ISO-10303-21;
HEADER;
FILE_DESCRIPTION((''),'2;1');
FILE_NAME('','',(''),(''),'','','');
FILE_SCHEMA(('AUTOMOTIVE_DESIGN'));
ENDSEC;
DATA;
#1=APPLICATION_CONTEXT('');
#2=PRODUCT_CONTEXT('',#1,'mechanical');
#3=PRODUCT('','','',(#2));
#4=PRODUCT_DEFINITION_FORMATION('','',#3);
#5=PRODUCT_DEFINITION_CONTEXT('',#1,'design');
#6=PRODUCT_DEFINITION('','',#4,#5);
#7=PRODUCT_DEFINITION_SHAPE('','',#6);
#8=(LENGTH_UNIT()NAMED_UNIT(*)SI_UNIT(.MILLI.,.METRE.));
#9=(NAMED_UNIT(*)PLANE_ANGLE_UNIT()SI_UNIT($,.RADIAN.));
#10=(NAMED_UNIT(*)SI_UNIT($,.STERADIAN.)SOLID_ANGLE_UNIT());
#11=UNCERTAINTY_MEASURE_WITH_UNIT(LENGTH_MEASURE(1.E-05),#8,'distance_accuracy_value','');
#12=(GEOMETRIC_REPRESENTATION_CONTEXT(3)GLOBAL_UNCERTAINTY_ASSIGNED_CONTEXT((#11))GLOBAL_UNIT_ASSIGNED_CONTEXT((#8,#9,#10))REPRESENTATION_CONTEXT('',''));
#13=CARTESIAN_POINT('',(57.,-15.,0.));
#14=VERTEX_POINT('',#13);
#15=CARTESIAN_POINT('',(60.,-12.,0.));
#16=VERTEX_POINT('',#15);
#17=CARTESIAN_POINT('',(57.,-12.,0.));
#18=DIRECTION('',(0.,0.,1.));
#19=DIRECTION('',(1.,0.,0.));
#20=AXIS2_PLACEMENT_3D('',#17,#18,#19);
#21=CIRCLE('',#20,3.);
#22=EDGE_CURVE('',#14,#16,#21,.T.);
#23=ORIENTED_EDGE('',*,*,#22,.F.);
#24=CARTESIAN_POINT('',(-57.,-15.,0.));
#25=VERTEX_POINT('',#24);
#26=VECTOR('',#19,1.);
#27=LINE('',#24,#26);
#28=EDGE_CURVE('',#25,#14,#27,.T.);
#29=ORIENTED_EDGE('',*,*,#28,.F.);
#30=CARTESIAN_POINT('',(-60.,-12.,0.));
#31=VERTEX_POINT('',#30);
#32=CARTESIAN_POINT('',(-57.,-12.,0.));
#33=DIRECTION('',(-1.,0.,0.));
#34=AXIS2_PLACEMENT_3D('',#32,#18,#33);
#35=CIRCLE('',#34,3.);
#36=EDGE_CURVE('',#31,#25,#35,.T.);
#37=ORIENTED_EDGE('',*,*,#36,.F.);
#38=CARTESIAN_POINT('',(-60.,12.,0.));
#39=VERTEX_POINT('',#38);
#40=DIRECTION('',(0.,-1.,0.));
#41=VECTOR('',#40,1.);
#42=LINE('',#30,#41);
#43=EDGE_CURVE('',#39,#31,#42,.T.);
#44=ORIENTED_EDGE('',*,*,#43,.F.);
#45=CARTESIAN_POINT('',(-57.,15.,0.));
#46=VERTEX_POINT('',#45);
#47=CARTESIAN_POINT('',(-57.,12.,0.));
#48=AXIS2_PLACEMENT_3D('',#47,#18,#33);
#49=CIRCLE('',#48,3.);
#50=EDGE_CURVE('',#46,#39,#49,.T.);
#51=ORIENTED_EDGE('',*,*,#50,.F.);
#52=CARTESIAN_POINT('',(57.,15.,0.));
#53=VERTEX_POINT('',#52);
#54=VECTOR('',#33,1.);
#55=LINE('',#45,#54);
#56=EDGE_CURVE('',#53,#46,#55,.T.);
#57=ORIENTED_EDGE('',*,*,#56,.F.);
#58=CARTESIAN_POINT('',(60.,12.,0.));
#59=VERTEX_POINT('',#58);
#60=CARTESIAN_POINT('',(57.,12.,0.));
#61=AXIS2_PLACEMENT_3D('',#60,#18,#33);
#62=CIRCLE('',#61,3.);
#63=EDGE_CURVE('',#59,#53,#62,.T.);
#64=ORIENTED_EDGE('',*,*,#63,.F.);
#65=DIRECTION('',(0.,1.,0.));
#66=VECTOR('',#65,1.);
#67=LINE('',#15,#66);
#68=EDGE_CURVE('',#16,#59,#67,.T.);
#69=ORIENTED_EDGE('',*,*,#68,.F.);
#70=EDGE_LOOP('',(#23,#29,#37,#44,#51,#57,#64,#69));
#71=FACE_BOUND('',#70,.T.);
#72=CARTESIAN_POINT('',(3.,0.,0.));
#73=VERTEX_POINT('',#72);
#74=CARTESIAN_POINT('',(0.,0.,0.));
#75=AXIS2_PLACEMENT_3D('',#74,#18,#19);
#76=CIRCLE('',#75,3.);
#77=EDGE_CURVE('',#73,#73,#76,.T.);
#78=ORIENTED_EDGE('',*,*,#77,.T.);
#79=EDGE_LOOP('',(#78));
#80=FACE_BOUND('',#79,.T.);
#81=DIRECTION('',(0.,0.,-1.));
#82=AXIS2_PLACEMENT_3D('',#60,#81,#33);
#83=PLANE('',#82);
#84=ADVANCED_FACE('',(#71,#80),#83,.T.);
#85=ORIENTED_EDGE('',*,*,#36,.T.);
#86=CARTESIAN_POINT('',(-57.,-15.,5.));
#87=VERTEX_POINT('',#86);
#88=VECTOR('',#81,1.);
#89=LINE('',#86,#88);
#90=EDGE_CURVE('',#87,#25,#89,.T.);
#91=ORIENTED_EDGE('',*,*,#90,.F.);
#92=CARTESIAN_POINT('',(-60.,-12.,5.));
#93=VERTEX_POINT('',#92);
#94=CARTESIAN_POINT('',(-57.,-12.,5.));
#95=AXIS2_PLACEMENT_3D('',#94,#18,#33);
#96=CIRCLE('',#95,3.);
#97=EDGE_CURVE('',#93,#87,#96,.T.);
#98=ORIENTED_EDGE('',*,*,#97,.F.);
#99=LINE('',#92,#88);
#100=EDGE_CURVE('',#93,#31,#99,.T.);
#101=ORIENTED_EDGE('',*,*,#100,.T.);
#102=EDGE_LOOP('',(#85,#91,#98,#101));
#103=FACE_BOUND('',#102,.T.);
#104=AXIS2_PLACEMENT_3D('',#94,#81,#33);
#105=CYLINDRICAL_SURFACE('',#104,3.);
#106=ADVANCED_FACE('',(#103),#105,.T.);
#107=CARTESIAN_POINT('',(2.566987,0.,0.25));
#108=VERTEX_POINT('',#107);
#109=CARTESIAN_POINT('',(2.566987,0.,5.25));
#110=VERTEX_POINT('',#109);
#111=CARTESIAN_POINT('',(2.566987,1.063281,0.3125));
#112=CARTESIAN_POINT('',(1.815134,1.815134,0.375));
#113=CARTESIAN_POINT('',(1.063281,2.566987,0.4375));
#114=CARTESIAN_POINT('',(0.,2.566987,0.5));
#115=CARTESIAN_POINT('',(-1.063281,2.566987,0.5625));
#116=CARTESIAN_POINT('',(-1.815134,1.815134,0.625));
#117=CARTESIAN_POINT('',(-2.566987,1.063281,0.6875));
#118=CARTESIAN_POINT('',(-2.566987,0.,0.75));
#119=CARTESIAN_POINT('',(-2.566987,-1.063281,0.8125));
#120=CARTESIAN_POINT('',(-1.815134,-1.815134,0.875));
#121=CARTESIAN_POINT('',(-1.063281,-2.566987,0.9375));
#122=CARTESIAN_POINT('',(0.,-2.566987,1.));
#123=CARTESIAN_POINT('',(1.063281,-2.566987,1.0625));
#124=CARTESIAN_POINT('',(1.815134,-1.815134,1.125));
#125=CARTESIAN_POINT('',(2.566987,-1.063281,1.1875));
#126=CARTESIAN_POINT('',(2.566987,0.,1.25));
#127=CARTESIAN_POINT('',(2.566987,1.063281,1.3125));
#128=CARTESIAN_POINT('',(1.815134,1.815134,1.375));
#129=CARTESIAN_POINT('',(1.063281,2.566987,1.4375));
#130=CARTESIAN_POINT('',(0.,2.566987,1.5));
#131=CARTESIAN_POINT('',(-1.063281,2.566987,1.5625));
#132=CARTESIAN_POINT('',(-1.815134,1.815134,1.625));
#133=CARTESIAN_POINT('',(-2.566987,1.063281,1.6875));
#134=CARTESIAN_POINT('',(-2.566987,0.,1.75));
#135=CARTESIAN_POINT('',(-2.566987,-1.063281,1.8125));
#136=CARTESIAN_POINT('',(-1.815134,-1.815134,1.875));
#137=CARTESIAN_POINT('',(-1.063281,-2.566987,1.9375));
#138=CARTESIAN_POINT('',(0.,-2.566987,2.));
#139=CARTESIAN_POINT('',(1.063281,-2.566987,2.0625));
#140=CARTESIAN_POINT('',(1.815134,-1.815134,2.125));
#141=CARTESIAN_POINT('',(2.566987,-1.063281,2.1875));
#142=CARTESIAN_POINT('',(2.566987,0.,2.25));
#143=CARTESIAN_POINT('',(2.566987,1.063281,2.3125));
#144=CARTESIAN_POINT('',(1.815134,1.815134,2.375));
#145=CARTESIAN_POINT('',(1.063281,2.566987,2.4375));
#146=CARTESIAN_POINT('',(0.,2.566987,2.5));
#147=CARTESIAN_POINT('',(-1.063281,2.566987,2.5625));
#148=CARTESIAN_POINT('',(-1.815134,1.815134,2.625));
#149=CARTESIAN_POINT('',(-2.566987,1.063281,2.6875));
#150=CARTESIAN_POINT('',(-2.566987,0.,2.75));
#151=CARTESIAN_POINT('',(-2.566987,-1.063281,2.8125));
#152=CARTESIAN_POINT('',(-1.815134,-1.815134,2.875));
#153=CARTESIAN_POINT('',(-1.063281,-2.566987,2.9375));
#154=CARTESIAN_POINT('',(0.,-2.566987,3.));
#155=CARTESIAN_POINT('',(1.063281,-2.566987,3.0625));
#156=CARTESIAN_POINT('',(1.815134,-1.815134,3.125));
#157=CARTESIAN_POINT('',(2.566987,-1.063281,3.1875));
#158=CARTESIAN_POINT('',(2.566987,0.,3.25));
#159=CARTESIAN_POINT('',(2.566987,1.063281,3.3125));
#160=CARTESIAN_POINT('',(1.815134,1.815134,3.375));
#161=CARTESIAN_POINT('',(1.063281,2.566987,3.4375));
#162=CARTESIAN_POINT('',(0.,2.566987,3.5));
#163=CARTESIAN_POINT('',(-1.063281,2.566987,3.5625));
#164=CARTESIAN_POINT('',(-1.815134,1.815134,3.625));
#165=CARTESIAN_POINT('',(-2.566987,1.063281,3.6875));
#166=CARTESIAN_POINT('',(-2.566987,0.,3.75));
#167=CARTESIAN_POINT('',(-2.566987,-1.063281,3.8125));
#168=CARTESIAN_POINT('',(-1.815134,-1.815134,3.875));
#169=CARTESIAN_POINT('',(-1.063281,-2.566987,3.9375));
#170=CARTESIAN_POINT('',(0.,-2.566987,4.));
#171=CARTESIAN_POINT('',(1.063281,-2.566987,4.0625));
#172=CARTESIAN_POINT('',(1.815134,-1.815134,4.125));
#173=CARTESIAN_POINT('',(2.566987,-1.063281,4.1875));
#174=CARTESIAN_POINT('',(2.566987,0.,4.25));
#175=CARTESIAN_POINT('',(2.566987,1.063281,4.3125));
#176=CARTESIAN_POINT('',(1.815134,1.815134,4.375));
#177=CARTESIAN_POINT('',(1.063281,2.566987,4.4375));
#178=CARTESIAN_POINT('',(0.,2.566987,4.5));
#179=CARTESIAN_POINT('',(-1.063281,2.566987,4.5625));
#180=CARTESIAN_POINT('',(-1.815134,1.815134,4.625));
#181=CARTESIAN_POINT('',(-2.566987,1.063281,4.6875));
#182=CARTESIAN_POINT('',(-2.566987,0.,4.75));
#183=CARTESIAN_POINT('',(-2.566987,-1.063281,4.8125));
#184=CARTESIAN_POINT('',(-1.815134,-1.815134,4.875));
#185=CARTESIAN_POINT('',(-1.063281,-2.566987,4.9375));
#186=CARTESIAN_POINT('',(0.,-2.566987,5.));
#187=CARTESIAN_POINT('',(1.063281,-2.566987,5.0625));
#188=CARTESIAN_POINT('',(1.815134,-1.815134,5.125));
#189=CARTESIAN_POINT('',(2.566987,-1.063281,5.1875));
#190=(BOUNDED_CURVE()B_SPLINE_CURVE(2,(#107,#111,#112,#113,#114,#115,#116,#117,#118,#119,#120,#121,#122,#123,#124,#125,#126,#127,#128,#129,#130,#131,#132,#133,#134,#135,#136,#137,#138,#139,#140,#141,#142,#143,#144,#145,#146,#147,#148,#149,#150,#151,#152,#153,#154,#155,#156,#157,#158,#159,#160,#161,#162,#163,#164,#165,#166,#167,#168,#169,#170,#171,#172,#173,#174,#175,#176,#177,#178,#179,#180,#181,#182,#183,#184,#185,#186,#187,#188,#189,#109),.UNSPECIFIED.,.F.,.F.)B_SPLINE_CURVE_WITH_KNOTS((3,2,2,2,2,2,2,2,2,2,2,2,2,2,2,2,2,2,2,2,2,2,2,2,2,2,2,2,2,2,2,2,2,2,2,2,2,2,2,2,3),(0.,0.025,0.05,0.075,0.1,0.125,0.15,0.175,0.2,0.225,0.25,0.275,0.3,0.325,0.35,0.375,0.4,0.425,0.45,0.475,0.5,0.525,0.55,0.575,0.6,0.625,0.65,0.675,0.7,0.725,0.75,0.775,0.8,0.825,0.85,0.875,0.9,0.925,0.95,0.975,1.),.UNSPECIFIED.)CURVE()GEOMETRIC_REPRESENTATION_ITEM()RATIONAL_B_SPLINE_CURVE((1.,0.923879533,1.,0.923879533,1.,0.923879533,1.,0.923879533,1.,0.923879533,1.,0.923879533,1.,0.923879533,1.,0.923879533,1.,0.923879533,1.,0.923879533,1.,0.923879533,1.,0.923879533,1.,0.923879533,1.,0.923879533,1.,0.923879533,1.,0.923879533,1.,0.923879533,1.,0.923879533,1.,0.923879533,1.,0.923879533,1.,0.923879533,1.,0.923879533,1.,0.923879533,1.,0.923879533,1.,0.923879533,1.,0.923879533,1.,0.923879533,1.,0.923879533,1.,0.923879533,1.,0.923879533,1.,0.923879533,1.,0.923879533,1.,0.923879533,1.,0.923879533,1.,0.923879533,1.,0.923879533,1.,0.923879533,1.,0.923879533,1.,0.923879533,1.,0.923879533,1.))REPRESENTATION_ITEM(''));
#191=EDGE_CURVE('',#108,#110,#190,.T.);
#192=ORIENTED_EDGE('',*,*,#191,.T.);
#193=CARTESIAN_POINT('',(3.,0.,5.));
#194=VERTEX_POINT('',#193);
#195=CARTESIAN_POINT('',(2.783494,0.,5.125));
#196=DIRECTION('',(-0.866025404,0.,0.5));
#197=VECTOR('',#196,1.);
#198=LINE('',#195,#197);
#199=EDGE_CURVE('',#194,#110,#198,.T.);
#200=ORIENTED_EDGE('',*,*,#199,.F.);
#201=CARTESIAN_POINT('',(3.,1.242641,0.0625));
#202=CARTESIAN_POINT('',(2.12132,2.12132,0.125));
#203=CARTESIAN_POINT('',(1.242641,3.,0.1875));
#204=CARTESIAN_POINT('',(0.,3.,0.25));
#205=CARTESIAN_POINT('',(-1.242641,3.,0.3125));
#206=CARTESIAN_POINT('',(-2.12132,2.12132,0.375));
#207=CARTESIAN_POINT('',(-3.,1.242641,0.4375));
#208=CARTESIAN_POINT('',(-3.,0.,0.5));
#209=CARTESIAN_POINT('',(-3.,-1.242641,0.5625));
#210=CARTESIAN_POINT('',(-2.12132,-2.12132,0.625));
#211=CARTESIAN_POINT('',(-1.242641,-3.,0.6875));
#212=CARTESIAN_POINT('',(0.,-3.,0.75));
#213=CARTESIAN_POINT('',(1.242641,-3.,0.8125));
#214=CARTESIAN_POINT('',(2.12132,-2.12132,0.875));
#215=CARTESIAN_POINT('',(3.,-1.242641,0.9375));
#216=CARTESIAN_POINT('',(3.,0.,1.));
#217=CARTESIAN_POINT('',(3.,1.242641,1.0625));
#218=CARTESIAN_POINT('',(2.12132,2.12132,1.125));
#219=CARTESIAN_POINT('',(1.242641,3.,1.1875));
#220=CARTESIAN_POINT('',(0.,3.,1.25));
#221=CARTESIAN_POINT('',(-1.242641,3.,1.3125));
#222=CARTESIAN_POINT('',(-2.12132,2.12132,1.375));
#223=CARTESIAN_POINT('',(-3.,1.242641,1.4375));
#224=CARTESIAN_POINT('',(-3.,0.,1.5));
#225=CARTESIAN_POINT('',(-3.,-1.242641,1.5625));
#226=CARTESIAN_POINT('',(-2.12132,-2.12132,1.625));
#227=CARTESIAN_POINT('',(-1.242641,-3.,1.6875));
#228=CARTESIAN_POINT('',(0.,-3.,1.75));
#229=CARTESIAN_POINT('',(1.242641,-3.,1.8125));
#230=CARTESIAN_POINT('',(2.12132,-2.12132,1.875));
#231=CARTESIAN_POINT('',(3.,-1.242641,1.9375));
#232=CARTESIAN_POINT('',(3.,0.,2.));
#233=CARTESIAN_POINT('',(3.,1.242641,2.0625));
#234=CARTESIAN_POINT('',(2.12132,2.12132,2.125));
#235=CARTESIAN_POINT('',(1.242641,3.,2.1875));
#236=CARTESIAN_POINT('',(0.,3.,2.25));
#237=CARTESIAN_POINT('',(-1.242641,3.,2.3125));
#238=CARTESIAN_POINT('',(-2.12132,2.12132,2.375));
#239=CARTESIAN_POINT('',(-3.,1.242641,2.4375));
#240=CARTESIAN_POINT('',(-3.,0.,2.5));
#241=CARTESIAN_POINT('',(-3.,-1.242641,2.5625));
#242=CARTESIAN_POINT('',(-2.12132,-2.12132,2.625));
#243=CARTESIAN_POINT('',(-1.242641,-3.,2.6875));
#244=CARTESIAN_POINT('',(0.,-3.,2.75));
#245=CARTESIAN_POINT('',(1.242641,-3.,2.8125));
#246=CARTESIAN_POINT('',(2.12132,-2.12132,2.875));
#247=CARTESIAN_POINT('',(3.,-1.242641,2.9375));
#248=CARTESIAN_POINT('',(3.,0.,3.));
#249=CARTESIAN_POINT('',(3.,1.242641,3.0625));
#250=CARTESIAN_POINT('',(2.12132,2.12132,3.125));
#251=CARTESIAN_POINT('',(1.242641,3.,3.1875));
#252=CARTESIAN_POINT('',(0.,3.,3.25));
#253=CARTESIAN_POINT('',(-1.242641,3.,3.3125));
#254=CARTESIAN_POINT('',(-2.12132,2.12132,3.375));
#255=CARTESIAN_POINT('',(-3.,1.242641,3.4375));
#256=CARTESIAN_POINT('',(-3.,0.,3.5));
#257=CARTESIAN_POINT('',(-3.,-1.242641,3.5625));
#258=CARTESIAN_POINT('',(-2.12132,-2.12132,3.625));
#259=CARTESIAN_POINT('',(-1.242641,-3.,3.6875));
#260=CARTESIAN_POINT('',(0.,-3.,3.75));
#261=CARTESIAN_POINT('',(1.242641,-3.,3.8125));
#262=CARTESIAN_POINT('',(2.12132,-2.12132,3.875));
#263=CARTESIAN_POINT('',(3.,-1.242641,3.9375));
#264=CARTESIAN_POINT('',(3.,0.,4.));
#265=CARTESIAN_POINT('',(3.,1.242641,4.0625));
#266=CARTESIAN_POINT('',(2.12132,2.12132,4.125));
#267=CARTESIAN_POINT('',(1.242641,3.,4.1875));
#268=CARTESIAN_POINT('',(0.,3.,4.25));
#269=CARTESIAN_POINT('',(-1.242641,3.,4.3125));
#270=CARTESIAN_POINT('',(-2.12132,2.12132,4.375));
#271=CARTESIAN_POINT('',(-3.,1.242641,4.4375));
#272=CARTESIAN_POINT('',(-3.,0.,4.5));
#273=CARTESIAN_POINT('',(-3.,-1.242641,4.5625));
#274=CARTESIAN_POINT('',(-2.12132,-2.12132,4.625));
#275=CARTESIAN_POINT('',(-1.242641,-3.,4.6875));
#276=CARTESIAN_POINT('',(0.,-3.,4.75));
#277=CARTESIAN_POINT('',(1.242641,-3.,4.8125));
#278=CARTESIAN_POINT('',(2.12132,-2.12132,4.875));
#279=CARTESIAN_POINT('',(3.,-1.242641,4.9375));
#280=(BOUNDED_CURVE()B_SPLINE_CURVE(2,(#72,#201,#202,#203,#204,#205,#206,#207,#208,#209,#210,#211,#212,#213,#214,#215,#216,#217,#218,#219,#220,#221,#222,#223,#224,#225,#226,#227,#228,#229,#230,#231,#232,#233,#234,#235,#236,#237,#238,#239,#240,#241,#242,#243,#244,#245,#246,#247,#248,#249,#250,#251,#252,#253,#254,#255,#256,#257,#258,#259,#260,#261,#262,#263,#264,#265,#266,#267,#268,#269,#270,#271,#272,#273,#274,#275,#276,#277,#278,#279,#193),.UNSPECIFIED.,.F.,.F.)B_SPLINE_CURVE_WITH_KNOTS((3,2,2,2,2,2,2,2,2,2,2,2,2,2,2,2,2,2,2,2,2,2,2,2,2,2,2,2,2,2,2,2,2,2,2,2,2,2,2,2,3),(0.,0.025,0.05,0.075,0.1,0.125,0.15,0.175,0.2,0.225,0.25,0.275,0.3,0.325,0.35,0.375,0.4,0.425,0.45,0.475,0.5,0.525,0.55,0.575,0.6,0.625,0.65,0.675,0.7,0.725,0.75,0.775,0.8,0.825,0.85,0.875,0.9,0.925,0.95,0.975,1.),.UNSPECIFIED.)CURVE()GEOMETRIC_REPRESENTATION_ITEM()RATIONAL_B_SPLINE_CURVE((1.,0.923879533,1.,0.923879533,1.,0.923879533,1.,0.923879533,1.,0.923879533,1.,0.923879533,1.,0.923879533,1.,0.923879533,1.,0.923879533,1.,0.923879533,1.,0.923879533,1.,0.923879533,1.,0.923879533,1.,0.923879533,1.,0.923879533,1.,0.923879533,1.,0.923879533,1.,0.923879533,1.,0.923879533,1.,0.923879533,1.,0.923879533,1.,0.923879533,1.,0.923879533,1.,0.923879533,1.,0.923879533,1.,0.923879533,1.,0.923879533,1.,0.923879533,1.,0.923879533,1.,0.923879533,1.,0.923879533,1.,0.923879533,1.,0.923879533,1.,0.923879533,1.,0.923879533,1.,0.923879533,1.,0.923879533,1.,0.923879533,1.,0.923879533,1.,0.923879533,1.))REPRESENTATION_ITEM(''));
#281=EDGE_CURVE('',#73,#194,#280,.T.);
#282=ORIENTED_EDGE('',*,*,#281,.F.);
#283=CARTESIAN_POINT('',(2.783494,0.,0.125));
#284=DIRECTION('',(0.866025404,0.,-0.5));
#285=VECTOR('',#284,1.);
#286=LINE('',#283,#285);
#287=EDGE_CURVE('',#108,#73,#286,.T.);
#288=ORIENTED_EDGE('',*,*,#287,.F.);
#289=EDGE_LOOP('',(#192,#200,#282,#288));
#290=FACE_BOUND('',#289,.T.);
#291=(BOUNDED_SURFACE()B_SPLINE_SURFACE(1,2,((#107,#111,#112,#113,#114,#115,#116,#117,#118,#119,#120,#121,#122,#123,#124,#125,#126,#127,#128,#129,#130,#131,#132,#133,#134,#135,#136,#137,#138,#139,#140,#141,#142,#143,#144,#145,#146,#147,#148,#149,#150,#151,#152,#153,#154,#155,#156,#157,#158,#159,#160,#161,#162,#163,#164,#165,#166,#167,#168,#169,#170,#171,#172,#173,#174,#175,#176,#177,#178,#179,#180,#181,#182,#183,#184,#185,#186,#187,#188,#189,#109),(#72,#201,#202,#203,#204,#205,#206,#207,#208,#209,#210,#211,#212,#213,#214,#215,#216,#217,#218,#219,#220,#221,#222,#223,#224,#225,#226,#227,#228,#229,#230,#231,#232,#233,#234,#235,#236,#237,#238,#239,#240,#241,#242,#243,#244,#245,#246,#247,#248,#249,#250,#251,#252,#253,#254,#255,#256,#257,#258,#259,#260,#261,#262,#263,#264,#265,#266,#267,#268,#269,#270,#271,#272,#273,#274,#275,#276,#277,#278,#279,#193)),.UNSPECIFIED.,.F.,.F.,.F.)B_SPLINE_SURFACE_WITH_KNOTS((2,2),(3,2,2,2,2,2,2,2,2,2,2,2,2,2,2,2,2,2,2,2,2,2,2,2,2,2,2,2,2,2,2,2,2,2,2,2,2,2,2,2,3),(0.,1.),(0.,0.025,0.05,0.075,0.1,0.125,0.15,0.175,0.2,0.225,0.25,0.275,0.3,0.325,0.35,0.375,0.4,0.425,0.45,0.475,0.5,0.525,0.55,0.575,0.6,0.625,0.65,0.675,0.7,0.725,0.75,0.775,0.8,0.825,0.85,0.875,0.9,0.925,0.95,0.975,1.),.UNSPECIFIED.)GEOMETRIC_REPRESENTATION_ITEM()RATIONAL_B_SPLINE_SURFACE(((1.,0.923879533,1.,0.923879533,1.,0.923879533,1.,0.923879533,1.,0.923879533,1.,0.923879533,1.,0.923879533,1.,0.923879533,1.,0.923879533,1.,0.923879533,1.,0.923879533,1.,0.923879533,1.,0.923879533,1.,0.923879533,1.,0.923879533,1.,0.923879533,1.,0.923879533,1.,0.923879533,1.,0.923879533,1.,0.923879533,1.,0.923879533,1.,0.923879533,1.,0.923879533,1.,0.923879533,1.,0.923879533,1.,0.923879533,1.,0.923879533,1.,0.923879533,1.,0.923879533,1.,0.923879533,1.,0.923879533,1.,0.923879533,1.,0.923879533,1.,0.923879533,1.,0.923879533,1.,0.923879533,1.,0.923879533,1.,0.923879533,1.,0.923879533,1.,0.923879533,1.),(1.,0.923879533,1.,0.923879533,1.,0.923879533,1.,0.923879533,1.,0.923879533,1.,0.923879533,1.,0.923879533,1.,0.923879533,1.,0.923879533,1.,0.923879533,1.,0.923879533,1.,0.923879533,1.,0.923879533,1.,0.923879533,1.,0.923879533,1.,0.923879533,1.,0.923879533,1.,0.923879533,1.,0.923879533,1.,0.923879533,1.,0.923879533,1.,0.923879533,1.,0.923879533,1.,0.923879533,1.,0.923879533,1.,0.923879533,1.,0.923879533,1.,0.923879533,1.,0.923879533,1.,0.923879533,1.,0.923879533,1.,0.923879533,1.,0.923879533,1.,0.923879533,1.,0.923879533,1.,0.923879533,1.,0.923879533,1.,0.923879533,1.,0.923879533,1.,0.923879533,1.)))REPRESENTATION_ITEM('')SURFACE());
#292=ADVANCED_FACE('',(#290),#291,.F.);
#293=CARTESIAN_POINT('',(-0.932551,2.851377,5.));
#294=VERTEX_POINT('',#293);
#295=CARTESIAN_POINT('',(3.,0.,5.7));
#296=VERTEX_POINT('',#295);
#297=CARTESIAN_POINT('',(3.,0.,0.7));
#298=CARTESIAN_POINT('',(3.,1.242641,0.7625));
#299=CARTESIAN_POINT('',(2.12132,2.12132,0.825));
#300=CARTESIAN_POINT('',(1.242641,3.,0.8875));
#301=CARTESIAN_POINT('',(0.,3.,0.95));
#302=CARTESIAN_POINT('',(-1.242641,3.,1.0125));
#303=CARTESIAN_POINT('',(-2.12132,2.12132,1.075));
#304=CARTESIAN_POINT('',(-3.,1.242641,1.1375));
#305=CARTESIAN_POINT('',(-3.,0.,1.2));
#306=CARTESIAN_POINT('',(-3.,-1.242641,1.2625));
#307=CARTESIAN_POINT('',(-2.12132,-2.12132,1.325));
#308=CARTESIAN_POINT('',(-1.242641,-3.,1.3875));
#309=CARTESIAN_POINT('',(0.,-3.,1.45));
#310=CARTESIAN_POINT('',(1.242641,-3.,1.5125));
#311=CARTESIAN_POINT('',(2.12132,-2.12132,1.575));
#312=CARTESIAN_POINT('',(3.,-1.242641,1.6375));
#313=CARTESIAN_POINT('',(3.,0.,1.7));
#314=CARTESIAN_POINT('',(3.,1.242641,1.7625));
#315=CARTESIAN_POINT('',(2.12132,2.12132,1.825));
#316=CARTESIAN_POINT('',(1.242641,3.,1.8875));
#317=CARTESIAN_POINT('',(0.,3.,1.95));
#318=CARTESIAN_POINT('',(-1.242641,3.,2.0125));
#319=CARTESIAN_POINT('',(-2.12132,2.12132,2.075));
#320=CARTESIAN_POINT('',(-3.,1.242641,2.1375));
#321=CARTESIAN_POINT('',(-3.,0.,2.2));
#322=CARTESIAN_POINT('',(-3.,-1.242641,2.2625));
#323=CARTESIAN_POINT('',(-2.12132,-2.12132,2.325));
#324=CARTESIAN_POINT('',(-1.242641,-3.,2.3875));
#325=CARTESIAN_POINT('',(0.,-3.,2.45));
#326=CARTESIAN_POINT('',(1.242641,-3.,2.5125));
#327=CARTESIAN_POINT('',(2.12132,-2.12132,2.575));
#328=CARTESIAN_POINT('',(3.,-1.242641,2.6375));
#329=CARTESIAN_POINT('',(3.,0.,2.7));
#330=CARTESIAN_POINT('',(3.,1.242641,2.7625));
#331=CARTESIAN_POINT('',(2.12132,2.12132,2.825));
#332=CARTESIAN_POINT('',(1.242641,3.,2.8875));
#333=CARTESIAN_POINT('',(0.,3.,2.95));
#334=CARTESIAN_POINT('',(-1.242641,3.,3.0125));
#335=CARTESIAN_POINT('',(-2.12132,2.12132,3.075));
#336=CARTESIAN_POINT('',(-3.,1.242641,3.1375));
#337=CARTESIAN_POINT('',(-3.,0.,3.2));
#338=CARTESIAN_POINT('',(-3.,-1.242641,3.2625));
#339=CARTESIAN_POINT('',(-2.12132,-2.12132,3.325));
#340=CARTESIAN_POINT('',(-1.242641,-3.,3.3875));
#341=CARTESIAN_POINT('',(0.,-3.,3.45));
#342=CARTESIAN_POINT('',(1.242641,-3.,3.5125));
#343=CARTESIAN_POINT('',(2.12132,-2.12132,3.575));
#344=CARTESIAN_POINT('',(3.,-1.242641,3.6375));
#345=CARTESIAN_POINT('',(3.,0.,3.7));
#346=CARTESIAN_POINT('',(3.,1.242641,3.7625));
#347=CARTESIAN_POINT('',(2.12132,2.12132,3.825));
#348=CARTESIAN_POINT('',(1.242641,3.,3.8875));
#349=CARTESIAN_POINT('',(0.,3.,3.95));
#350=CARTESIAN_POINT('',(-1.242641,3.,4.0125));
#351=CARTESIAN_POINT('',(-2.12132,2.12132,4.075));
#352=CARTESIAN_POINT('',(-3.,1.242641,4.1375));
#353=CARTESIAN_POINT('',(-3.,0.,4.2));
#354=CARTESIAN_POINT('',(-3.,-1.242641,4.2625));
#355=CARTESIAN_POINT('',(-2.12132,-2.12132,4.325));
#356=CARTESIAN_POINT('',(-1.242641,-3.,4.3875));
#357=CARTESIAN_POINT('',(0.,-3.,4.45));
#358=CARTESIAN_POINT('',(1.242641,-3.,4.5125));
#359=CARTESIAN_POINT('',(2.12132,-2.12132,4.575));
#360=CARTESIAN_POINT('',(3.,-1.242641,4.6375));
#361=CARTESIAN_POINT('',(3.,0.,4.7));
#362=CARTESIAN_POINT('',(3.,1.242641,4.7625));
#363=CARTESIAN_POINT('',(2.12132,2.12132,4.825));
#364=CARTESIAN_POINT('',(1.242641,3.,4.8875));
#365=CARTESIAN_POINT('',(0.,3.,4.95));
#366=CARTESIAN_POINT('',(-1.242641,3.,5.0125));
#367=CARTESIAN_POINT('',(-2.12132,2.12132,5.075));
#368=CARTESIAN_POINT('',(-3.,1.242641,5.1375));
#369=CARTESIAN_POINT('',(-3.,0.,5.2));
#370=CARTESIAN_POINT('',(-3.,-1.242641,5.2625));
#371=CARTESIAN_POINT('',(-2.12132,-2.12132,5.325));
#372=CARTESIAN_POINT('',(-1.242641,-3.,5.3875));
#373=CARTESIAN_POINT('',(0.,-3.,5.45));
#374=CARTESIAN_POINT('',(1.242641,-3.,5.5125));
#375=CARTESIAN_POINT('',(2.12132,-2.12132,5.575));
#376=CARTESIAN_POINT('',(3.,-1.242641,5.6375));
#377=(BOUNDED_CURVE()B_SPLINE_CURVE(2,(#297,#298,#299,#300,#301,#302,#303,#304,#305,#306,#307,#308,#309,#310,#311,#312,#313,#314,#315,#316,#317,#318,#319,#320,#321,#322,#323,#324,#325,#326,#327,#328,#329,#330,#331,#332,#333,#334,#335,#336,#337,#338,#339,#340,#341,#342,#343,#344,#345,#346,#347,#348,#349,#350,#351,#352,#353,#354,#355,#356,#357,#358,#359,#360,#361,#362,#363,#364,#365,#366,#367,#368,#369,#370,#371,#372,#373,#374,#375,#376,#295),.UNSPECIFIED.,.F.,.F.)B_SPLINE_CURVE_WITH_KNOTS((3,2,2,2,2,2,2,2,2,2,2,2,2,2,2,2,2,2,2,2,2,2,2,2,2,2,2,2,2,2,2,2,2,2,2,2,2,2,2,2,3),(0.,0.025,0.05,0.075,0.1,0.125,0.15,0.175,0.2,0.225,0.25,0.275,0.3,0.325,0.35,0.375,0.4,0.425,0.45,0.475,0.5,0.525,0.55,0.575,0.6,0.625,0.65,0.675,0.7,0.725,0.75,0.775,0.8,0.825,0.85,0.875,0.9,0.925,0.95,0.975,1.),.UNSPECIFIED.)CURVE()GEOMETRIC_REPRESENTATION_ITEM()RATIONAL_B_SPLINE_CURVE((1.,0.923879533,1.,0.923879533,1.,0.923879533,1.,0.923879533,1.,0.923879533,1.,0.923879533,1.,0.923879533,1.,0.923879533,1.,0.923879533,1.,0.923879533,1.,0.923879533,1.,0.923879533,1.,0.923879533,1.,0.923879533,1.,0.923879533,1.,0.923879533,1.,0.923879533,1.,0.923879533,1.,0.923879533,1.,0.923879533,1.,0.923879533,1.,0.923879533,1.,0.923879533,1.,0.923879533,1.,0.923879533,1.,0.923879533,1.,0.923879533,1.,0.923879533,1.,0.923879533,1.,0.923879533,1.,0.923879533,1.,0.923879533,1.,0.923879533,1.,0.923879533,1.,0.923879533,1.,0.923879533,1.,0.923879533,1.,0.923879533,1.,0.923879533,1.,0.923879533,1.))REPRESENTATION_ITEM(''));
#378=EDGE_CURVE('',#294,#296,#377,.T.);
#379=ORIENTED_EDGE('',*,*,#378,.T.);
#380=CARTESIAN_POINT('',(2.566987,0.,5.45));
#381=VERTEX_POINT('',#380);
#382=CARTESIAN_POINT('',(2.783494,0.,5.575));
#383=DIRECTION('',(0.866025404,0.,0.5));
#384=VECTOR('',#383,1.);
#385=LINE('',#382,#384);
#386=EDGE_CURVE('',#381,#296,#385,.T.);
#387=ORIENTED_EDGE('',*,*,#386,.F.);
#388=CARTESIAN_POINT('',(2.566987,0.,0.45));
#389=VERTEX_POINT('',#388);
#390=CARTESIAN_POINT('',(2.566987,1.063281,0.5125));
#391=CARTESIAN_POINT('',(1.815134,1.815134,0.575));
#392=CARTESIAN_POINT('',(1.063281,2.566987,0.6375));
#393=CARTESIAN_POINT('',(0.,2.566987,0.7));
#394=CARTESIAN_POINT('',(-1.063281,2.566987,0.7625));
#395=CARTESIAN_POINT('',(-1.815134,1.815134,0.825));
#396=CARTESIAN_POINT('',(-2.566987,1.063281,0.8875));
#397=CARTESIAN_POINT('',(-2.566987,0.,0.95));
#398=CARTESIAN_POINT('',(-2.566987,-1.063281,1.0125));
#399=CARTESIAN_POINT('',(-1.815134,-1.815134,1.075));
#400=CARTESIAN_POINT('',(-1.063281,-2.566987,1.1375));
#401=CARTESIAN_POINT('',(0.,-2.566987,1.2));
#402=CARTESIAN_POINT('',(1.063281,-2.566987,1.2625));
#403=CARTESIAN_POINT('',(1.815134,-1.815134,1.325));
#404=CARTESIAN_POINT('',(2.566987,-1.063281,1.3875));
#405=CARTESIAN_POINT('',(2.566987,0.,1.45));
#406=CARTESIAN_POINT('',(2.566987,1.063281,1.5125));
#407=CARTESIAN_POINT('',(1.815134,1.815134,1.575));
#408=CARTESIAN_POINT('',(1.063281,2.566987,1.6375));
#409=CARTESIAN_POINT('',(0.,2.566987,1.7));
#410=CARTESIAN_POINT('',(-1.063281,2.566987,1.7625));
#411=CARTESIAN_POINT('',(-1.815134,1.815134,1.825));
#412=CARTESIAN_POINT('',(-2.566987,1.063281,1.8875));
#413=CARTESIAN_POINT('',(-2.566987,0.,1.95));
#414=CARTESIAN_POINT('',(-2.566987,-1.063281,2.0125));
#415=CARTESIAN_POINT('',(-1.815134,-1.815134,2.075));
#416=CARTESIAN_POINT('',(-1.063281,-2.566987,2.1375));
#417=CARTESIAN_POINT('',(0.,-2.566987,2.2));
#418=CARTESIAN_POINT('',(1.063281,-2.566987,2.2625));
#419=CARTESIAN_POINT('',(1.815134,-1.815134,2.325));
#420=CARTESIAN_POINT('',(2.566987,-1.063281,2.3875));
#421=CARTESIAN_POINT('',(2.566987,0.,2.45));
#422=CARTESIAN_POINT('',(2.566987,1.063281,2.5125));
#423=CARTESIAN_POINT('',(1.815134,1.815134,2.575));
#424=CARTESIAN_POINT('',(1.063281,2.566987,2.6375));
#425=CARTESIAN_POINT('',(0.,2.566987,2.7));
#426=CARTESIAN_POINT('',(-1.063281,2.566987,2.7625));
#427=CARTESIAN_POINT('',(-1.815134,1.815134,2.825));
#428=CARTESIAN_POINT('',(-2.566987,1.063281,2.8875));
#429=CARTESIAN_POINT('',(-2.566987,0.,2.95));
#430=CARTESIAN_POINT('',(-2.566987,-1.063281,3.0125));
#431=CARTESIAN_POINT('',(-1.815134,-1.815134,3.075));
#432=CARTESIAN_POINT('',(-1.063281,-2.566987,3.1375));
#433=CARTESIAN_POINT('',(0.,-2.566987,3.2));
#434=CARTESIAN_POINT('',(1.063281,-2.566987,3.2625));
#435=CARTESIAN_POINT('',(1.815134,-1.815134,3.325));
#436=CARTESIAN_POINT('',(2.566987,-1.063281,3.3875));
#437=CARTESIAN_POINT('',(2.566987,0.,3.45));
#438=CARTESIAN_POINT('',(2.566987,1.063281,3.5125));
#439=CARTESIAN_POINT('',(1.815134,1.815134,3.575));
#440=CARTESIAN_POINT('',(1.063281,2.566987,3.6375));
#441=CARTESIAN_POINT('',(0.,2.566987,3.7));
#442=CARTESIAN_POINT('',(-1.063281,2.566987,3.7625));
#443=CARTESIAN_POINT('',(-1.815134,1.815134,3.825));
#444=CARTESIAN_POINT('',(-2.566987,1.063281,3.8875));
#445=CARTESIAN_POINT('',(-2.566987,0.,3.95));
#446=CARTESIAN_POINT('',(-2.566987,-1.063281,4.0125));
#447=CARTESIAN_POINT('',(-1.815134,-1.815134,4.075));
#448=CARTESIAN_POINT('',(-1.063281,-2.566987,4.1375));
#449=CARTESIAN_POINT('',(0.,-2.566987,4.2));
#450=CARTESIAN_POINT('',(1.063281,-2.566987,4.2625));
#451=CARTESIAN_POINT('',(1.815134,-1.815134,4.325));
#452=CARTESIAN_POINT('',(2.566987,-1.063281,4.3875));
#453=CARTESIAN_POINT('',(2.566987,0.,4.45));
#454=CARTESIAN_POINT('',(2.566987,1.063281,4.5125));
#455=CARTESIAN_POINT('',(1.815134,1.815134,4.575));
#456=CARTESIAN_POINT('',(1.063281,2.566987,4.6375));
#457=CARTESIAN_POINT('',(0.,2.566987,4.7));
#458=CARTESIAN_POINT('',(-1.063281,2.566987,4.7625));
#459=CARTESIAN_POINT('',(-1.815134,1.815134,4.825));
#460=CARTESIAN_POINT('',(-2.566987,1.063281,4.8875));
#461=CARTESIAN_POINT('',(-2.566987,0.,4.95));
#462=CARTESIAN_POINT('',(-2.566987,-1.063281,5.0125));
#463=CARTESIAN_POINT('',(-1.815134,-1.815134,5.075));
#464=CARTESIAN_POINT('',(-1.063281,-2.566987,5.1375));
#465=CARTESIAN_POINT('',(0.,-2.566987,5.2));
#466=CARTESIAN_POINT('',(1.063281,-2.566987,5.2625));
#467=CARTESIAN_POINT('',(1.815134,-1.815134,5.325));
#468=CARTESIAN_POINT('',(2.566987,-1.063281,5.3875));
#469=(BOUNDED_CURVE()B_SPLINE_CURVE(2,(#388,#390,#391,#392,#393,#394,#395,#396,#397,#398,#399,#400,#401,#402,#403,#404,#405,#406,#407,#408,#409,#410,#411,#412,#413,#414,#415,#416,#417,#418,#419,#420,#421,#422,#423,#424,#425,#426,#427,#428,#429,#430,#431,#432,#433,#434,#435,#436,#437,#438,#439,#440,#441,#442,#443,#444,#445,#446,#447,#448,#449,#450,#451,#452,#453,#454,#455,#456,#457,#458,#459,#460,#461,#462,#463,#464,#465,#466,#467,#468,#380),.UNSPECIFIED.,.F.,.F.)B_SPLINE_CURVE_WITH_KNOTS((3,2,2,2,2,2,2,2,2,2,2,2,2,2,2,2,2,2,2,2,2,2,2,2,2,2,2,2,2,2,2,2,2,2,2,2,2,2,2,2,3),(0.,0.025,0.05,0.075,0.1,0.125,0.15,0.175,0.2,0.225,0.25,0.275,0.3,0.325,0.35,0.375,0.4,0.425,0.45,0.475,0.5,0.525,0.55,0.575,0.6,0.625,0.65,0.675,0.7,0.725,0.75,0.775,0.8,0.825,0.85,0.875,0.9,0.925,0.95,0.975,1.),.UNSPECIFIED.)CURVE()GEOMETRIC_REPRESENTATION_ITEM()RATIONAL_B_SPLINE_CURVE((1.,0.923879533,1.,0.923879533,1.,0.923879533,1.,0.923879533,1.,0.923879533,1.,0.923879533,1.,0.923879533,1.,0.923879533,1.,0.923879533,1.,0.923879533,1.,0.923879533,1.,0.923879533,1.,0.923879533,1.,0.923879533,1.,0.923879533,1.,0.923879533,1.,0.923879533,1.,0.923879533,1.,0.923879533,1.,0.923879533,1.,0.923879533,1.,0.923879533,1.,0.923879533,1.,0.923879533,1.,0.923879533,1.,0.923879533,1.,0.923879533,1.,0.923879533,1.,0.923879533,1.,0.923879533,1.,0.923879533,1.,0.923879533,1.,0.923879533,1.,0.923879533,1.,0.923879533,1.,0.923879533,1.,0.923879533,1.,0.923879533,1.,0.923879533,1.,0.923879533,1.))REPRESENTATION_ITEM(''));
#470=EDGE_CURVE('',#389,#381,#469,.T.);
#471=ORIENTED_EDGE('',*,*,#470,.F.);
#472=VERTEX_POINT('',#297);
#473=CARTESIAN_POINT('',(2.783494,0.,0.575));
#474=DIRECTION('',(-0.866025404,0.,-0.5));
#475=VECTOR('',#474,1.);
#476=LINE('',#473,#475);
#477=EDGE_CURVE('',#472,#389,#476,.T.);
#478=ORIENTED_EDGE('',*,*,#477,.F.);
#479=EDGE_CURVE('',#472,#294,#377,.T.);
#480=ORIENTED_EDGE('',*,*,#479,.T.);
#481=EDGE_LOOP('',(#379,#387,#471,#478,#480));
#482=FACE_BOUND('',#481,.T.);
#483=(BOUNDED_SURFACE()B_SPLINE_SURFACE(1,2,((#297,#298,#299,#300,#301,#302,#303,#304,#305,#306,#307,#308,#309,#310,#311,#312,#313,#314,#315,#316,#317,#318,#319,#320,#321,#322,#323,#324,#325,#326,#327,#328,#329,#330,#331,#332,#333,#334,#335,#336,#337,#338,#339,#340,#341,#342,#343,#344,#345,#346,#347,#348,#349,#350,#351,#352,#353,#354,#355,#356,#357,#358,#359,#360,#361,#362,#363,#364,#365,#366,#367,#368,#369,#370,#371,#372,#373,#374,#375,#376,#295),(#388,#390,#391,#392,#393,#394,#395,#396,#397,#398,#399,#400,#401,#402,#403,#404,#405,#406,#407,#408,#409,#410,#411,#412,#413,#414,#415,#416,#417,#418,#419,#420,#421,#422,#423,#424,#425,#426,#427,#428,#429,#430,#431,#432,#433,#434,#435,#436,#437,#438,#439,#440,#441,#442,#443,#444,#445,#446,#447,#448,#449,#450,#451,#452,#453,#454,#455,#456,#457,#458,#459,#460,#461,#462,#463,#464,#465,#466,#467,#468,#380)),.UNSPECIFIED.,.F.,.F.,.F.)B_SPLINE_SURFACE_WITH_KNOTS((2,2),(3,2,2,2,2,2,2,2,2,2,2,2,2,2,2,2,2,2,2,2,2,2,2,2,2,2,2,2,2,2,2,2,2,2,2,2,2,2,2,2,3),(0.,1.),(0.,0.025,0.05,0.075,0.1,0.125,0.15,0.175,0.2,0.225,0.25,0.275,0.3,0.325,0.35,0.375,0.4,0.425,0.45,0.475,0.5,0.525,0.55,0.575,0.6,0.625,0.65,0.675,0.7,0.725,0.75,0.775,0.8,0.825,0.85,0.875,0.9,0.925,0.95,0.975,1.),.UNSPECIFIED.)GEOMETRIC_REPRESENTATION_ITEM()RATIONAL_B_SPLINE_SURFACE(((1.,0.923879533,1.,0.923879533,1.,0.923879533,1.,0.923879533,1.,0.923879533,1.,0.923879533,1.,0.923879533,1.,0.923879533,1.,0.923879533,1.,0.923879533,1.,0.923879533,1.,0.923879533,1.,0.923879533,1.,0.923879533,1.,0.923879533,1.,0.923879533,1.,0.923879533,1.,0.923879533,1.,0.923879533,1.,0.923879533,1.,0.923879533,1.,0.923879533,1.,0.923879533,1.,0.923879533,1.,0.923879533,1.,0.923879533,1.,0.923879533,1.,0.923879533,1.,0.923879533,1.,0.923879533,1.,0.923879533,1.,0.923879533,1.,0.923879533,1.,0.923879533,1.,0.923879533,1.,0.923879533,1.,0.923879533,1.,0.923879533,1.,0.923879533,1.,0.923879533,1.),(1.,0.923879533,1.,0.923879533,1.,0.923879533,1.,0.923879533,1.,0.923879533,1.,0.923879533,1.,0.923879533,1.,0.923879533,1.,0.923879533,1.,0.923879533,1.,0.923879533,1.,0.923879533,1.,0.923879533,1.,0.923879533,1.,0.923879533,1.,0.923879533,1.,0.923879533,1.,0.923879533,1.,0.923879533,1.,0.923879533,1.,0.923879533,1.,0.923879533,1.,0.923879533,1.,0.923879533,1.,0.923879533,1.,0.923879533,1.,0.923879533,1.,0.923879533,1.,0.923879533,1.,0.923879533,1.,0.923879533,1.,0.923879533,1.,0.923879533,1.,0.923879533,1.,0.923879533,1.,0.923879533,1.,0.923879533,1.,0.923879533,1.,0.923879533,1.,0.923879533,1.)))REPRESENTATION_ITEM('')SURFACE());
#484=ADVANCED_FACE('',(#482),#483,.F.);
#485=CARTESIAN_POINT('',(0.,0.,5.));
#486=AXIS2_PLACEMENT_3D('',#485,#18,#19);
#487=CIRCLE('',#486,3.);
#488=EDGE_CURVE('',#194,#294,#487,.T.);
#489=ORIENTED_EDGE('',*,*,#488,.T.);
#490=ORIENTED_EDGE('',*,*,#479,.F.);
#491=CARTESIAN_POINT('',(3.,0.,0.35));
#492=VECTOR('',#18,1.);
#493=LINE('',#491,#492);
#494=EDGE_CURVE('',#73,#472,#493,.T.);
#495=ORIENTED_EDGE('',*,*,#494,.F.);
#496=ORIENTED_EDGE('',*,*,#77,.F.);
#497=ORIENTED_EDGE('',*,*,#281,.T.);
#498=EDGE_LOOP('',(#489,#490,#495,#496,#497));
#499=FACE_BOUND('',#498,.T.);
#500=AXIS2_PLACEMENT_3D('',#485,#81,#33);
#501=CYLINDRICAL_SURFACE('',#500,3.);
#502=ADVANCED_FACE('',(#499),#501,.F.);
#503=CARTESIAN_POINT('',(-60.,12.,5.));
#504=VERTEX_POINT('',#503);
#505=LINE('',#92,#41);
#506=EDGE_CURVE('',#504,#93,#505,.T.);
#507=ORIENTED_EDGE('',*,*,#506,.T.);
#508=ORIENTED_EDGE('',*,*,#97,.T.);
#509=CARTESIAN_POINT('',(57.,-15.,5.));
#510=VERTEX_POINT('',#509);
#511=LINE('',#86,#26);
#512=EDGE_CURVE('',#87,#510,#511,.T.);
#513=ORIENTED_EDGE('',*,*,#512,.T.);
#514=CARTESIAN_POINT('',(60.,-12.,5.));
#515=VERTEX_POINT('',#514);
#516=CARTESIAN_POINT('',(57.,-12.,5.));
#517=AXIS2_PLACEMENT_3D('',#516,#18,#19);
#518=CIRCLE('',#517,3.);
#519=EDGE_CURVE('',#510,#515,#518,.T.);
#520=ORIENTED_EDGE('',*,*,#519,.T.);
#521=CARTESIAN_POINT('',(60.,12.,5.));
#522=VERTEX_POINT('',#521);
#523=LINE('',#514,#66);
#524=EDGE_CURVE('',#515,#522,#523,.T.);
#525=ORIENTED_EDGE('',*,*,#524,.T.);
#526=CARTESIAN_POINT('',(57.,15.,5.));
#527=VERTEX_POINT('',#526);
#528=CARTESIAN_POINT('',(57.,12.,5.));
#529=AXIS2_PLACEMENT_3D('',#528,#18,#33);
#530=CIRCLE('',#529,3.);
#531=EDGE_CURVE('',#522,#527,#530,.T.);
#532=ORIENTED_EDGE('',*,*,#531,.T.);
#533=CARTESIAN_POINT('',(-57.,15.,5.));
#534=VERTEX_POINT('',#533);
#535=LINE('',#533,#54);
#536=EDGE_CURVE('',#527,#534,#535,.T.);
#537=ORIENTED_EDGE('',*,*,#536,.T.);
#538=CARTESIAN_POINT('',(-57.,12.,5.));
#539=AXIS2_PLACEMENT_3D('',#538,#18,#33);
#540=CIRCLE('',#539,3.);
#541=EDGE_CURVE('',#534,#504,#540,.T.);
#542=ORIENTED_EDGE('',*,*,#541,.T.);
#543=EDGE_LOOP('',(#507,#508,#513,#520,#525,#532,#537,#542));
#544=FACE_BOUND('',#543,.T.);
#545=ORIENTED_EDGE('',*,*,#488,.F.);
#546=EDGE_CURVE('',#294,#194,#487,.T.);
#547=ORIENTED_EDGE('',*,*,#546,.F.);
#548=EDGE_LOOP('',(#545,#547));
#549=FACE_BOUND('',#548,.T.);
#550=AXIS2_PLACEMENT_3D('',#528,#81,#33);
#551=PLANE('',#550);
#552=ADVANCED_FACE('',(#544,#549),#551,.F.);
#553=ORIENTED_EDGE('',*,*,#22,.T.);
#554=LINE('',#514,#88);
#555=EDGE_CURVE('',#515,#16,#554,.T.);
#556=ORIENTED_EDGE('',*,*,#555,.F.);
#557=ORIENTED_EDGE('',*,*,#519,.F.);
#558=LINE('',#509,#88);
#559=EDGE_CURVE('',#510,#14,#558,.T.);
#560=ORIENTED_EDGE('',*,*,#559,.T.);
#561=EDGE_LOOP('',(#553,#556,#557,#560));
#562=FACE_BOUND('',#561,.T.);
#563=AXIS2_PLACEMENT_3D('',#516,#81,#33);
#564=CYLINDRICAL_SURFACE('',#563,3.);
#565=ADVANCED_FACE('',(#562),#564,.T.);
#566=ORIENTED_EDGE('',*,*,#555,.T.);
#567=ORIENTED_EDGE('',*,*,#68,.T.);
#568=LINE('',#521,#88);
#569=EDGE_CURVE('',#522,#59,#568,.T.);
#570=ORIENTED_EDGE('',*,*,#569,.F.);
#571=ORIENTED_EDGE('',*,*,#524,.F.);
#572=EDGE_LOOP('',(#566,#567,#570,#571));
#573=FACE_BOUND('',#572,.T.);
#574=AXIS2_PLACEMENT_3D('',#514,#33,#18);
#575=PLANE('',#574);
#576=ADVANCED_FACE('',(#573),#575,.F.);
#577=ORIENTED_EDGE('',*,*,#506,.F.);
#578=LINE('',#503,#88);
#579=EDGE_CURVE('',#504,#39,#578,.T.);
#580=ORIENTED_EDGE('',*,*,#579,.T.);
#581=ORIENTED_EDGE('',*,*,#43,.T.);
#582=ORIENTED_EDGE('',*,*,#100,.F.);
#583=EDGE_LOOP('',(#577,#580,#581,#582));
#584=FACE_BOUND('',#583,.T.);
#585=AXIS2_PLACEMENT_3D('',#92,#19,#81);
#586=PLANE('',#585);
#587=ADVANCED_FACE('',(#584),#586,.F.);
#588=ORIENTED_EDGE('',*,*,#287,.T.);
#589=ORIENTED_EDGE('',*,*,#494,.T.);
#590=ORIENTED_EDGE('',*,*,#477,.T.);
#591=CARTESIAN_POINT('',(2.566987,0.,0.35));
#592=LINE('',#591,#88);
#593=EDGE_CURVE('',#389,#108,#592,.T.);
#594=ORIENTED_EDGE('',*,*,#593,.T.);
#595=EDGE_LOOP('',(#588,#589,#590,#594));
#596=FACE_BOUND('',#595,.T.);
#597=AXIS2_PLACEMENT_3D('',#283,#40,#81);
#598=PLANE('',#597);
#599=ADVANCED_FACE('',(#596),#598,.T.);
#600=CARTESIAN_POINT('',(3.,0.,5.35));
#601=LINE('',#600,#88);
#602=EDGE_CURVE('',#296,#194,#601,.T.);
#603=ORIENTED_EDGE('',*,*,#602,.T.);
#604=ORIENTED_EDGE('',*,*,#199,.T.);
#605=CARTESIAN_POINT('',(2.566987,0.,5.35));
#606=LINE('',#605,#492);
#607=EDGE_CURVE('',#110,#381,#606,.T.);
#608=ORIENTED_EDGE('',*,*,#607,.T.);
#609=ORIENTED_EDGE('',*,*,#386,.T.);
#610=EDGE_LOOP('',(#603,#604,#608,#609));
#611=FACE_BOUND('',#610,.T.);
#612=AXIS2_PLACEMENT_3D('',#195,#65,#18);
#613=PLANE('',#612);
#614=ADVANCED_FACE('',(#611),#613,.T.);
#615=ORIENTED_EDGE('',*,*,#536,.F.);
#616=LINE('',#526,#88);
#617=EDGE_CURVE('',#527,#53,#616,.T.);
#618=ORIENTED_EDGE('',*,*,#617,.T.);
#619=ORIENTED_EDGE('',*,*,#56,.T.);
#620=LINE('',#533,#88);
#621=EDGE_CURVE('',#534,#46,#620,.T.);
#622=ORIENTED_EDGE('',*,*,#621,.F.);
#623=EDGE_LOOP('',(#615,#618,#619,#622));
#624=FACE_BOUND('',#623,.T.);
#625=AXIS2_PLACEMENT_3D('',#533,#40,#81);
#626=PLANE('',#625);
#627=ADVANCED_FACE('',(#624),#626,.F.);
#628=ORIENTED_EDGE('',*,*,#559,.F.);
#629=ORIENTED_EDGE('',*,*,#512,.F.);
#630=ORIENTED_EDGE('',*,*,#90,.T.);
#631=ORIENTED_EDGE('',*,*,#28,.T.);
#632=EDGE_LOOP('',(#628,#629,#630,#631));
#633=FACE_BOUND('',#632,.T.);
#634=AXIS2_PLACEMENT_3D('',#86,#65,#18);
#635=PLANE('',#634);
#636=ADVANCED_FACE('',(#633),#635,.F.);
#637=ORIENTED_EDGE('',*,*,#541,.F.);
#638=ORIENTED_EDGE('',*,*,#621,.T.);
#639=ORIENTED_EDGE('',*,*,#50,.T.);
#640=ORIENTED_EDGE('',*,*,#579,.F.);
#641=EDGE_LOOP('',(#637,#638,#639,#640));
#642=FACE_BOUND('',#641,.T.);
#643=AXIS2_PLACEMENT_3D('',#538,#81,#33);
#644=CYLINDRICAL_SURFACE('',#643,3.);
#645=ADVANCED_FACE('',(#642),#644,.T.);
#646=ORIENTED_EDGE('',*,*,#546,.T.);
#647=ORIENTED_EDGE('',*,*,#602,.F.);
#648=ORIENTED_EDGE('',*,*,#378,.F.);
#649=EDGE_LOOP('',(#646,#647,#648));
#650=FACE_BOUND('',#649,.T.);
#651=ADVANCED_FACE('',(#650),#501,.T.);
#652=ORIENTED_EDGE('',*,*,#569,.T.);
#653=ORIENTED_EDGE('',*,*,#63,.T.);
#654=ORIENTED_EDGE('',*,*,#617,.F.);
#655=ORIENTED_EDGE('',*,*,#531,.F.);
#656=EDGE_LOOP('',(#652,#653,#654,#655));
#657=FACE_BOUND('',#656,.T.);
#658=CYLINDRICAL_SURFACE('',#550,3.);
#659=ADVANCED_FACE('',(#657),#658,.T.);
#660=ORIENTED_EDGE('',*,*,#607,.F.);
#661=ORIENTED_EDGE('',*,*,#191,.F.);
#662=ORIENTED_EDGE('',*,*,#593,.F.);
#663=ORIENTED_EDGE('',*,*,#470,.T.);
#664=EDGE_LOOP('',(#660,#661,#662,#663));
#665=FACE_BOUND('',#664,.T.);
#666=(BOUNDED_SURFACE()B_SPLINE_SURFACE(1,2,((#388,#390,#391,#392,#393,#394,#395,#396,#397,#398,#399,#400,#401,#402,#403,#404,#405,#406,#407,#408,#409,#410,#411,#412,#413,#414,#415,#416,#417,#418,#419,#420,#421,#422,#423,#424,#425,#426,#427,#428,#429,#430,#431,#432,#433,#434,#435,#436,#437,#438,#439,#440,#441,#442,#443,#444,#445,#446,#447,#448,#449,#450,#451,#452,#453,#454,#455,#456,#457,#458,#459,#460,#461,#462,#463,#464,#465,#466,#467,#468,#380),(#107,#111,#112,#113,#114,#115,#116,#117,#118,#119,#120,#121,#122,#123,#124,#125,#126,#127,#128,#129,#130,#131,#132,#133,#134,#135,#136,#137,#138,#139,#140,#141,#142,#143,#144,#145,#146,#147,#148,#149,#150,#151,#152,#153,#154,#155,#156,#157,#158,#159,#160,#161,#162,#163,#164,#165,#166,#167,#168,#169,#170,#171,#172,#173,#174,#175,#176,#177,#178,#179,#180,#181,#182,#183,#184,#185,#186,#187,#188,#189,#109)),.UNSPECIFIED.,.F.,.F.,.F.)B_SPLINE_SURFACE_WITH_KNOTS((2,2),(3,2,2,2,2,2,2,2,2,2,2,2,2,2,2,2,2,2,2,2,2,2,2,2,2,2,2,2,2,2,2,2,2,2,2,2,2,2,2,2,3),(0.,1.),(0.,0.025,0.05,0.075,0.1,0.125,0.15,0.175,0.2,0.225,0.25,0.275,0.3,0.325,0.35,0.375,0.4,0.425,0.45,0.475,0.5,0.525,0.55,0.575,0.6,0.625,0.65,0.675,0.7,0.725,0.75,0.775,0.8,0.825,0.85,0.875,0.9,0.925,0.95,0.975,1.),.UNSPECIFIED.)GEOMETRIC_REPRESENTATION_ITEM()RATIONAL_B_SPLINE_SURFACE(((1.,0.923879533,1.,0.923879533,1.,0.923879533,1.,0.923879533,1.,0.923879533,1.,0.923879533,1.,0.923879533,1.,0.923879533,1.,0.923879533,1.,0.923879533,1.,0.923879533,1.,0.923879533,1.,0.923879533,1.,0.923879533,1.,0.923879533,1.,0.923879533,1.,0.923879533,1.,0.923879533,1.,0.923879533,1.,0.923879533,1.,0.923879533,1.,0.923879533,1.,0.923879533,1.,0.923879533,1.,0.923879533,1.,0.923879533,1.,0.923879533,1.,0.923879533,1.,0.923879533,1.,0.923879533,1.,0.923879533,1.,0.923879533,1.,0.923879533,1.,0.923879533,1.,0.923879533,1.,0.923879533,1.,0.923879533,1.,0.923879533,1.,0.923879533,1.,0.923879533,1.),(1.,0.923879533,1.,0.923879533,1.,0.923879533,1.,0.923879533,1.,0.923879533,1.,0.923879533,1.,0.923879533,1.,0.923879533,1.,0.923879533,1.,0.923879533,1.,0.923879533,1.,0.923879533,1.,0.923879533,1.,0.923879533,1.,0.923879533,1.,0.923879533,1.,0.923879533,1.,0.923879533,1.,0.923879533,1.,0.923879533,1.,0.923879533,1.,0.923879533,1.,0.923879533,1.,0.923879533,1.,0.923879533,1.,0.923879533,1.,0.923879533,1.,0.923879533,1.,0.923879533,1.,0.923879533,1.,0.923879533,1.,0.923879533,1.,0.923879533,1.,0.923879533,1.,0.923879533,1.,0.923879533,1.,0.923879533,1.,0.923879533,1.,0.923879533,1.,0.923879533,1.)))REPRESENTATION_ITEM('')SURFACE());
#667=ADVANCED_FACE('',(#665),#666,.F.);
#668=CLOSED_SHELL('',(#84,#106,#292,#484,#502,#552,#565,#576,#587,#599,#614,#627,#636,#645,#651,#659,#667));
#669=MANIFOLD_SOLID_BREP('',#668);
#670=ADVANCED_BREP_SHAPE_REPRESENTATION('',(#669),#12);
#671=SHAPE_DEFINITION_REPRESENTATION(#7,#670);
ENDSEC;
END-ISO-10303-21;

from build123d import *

# Parameters (mm, degrees)
SKETCH2_R           = 3
BOSS_EXTRUDE1_DEPTH = 5
THREAD1_PITCH       = 1


with BuildPart() as part:
    # Sketch2 → Boss-Extrude1 (new body)
    with BuildSketch(Plane.XY):
        with BuildLine():
            Line((-57, -15), (57, -15))
            ThreePointArc((57, -15), (59.121320344, -14.121320344), (60, -12))
            Line((60, -12), (60, 12))
            ThreePointArc((60, 12), (59.121320344, 14.121320344), (57, 15))
            Line((57, 15), (-57, 15))
            ThreePointArc((-57, 15), (-59.121320344, 14.121320344), (-60, 12))
            Line((-60, 12), (-60, -12))
            ThreePointArc((-60, -12), (-59.121320344, -14.121320344), (-57, -15))
        make_face()
        Circle(SKETCH2_R, mode=Mode.SUBTRACT)
    extrude(amount=BOSS_EXTRUDE1_DEPTH)

    # Thread1: the profile of Thread Profile2 profile screwed along a right-hand helix of 5 turns, 8 arcs to a turn; built about Z, then put on its axis
    thread1_z = Axis((0, 0, 0), (0, 0, 1))
    thread1_corners = [(3.0003, 0, -0.000173205), (3.0003, 0, 0.700173203), (2.5669873, 0, 0.449999999), (2.5669873, 0, 0.249999999)]
    with BuildLine(mode=Mode.PRIVATE) as thread1_profile:
        Line(thread1_corners[0], thread1_corners[1])
        Line(thread1_corners[1], thread1_corners[2])
        Line(thread1_corners[2], thread1_corners[3])
        Line(thread1_corners[3], thread1_corners[0])
    thread1_cap = Face(thread1_profile.wire())
    thread1_turn_angles = [0, 22.5, 45, 67.5, 90, 112.5, 135, 157.5, 180, 202.5, 225, 247.5, 270, 292.5, 315, 337.5, 360]
    thread1_turn_weights = [1, 0.9238795325112867, 1, 0.9238795325112867, 1, 0.9238795325112867, 1, 0.9238795325112867, 1, 0.9238795325112867, 1, 0.9238795325112867, 1, 0.9238795325112867, 1, 0.9238795325112867, 1]
    thread1_turn_rails = [Edge.make_bspline([Vector(p[0], p[1], 0).rotate(thread1_z, thread1_turn_angles[k]) / thread1_turn_weights[k] + Vector(0, 0, p[2] + THREAD1_PITCH * thread1_turn_angles[k] / 360) for k in range(17)], [0, 0, 0, 1, 1, 2, 2, 3, 3, 4, 4, 5, 5, 6, 6, 7, 7, 8, 8, 8], 2, thread1_turn_weights) for p in thread1_corners]
    thread1_turn_sides = [Face.make_surface_from_curves(thread1_turn_rails[p[0]], thread1_turn_rails[p[1]]) for p in [(0, 1), (1, 2), (2, 3), (3, 0)]]
    thread1 = Plane(origin=(0, 0, 0), x_dir=(1, 0, 0), z_dir=(0, 0, 1)) * Solid(Shell([*[p.moved(Location((0, 0, THREAD1_PITCH * i))) for i in range(5) for p in thread1_turn_sides], thread1_cap, thread1_cap.rotate(thread1_z, 1800).moved(Location((0, 0, THREAD1_PITCH * 1800 / 360)))]))
    add(thread1)


solid = part.part
